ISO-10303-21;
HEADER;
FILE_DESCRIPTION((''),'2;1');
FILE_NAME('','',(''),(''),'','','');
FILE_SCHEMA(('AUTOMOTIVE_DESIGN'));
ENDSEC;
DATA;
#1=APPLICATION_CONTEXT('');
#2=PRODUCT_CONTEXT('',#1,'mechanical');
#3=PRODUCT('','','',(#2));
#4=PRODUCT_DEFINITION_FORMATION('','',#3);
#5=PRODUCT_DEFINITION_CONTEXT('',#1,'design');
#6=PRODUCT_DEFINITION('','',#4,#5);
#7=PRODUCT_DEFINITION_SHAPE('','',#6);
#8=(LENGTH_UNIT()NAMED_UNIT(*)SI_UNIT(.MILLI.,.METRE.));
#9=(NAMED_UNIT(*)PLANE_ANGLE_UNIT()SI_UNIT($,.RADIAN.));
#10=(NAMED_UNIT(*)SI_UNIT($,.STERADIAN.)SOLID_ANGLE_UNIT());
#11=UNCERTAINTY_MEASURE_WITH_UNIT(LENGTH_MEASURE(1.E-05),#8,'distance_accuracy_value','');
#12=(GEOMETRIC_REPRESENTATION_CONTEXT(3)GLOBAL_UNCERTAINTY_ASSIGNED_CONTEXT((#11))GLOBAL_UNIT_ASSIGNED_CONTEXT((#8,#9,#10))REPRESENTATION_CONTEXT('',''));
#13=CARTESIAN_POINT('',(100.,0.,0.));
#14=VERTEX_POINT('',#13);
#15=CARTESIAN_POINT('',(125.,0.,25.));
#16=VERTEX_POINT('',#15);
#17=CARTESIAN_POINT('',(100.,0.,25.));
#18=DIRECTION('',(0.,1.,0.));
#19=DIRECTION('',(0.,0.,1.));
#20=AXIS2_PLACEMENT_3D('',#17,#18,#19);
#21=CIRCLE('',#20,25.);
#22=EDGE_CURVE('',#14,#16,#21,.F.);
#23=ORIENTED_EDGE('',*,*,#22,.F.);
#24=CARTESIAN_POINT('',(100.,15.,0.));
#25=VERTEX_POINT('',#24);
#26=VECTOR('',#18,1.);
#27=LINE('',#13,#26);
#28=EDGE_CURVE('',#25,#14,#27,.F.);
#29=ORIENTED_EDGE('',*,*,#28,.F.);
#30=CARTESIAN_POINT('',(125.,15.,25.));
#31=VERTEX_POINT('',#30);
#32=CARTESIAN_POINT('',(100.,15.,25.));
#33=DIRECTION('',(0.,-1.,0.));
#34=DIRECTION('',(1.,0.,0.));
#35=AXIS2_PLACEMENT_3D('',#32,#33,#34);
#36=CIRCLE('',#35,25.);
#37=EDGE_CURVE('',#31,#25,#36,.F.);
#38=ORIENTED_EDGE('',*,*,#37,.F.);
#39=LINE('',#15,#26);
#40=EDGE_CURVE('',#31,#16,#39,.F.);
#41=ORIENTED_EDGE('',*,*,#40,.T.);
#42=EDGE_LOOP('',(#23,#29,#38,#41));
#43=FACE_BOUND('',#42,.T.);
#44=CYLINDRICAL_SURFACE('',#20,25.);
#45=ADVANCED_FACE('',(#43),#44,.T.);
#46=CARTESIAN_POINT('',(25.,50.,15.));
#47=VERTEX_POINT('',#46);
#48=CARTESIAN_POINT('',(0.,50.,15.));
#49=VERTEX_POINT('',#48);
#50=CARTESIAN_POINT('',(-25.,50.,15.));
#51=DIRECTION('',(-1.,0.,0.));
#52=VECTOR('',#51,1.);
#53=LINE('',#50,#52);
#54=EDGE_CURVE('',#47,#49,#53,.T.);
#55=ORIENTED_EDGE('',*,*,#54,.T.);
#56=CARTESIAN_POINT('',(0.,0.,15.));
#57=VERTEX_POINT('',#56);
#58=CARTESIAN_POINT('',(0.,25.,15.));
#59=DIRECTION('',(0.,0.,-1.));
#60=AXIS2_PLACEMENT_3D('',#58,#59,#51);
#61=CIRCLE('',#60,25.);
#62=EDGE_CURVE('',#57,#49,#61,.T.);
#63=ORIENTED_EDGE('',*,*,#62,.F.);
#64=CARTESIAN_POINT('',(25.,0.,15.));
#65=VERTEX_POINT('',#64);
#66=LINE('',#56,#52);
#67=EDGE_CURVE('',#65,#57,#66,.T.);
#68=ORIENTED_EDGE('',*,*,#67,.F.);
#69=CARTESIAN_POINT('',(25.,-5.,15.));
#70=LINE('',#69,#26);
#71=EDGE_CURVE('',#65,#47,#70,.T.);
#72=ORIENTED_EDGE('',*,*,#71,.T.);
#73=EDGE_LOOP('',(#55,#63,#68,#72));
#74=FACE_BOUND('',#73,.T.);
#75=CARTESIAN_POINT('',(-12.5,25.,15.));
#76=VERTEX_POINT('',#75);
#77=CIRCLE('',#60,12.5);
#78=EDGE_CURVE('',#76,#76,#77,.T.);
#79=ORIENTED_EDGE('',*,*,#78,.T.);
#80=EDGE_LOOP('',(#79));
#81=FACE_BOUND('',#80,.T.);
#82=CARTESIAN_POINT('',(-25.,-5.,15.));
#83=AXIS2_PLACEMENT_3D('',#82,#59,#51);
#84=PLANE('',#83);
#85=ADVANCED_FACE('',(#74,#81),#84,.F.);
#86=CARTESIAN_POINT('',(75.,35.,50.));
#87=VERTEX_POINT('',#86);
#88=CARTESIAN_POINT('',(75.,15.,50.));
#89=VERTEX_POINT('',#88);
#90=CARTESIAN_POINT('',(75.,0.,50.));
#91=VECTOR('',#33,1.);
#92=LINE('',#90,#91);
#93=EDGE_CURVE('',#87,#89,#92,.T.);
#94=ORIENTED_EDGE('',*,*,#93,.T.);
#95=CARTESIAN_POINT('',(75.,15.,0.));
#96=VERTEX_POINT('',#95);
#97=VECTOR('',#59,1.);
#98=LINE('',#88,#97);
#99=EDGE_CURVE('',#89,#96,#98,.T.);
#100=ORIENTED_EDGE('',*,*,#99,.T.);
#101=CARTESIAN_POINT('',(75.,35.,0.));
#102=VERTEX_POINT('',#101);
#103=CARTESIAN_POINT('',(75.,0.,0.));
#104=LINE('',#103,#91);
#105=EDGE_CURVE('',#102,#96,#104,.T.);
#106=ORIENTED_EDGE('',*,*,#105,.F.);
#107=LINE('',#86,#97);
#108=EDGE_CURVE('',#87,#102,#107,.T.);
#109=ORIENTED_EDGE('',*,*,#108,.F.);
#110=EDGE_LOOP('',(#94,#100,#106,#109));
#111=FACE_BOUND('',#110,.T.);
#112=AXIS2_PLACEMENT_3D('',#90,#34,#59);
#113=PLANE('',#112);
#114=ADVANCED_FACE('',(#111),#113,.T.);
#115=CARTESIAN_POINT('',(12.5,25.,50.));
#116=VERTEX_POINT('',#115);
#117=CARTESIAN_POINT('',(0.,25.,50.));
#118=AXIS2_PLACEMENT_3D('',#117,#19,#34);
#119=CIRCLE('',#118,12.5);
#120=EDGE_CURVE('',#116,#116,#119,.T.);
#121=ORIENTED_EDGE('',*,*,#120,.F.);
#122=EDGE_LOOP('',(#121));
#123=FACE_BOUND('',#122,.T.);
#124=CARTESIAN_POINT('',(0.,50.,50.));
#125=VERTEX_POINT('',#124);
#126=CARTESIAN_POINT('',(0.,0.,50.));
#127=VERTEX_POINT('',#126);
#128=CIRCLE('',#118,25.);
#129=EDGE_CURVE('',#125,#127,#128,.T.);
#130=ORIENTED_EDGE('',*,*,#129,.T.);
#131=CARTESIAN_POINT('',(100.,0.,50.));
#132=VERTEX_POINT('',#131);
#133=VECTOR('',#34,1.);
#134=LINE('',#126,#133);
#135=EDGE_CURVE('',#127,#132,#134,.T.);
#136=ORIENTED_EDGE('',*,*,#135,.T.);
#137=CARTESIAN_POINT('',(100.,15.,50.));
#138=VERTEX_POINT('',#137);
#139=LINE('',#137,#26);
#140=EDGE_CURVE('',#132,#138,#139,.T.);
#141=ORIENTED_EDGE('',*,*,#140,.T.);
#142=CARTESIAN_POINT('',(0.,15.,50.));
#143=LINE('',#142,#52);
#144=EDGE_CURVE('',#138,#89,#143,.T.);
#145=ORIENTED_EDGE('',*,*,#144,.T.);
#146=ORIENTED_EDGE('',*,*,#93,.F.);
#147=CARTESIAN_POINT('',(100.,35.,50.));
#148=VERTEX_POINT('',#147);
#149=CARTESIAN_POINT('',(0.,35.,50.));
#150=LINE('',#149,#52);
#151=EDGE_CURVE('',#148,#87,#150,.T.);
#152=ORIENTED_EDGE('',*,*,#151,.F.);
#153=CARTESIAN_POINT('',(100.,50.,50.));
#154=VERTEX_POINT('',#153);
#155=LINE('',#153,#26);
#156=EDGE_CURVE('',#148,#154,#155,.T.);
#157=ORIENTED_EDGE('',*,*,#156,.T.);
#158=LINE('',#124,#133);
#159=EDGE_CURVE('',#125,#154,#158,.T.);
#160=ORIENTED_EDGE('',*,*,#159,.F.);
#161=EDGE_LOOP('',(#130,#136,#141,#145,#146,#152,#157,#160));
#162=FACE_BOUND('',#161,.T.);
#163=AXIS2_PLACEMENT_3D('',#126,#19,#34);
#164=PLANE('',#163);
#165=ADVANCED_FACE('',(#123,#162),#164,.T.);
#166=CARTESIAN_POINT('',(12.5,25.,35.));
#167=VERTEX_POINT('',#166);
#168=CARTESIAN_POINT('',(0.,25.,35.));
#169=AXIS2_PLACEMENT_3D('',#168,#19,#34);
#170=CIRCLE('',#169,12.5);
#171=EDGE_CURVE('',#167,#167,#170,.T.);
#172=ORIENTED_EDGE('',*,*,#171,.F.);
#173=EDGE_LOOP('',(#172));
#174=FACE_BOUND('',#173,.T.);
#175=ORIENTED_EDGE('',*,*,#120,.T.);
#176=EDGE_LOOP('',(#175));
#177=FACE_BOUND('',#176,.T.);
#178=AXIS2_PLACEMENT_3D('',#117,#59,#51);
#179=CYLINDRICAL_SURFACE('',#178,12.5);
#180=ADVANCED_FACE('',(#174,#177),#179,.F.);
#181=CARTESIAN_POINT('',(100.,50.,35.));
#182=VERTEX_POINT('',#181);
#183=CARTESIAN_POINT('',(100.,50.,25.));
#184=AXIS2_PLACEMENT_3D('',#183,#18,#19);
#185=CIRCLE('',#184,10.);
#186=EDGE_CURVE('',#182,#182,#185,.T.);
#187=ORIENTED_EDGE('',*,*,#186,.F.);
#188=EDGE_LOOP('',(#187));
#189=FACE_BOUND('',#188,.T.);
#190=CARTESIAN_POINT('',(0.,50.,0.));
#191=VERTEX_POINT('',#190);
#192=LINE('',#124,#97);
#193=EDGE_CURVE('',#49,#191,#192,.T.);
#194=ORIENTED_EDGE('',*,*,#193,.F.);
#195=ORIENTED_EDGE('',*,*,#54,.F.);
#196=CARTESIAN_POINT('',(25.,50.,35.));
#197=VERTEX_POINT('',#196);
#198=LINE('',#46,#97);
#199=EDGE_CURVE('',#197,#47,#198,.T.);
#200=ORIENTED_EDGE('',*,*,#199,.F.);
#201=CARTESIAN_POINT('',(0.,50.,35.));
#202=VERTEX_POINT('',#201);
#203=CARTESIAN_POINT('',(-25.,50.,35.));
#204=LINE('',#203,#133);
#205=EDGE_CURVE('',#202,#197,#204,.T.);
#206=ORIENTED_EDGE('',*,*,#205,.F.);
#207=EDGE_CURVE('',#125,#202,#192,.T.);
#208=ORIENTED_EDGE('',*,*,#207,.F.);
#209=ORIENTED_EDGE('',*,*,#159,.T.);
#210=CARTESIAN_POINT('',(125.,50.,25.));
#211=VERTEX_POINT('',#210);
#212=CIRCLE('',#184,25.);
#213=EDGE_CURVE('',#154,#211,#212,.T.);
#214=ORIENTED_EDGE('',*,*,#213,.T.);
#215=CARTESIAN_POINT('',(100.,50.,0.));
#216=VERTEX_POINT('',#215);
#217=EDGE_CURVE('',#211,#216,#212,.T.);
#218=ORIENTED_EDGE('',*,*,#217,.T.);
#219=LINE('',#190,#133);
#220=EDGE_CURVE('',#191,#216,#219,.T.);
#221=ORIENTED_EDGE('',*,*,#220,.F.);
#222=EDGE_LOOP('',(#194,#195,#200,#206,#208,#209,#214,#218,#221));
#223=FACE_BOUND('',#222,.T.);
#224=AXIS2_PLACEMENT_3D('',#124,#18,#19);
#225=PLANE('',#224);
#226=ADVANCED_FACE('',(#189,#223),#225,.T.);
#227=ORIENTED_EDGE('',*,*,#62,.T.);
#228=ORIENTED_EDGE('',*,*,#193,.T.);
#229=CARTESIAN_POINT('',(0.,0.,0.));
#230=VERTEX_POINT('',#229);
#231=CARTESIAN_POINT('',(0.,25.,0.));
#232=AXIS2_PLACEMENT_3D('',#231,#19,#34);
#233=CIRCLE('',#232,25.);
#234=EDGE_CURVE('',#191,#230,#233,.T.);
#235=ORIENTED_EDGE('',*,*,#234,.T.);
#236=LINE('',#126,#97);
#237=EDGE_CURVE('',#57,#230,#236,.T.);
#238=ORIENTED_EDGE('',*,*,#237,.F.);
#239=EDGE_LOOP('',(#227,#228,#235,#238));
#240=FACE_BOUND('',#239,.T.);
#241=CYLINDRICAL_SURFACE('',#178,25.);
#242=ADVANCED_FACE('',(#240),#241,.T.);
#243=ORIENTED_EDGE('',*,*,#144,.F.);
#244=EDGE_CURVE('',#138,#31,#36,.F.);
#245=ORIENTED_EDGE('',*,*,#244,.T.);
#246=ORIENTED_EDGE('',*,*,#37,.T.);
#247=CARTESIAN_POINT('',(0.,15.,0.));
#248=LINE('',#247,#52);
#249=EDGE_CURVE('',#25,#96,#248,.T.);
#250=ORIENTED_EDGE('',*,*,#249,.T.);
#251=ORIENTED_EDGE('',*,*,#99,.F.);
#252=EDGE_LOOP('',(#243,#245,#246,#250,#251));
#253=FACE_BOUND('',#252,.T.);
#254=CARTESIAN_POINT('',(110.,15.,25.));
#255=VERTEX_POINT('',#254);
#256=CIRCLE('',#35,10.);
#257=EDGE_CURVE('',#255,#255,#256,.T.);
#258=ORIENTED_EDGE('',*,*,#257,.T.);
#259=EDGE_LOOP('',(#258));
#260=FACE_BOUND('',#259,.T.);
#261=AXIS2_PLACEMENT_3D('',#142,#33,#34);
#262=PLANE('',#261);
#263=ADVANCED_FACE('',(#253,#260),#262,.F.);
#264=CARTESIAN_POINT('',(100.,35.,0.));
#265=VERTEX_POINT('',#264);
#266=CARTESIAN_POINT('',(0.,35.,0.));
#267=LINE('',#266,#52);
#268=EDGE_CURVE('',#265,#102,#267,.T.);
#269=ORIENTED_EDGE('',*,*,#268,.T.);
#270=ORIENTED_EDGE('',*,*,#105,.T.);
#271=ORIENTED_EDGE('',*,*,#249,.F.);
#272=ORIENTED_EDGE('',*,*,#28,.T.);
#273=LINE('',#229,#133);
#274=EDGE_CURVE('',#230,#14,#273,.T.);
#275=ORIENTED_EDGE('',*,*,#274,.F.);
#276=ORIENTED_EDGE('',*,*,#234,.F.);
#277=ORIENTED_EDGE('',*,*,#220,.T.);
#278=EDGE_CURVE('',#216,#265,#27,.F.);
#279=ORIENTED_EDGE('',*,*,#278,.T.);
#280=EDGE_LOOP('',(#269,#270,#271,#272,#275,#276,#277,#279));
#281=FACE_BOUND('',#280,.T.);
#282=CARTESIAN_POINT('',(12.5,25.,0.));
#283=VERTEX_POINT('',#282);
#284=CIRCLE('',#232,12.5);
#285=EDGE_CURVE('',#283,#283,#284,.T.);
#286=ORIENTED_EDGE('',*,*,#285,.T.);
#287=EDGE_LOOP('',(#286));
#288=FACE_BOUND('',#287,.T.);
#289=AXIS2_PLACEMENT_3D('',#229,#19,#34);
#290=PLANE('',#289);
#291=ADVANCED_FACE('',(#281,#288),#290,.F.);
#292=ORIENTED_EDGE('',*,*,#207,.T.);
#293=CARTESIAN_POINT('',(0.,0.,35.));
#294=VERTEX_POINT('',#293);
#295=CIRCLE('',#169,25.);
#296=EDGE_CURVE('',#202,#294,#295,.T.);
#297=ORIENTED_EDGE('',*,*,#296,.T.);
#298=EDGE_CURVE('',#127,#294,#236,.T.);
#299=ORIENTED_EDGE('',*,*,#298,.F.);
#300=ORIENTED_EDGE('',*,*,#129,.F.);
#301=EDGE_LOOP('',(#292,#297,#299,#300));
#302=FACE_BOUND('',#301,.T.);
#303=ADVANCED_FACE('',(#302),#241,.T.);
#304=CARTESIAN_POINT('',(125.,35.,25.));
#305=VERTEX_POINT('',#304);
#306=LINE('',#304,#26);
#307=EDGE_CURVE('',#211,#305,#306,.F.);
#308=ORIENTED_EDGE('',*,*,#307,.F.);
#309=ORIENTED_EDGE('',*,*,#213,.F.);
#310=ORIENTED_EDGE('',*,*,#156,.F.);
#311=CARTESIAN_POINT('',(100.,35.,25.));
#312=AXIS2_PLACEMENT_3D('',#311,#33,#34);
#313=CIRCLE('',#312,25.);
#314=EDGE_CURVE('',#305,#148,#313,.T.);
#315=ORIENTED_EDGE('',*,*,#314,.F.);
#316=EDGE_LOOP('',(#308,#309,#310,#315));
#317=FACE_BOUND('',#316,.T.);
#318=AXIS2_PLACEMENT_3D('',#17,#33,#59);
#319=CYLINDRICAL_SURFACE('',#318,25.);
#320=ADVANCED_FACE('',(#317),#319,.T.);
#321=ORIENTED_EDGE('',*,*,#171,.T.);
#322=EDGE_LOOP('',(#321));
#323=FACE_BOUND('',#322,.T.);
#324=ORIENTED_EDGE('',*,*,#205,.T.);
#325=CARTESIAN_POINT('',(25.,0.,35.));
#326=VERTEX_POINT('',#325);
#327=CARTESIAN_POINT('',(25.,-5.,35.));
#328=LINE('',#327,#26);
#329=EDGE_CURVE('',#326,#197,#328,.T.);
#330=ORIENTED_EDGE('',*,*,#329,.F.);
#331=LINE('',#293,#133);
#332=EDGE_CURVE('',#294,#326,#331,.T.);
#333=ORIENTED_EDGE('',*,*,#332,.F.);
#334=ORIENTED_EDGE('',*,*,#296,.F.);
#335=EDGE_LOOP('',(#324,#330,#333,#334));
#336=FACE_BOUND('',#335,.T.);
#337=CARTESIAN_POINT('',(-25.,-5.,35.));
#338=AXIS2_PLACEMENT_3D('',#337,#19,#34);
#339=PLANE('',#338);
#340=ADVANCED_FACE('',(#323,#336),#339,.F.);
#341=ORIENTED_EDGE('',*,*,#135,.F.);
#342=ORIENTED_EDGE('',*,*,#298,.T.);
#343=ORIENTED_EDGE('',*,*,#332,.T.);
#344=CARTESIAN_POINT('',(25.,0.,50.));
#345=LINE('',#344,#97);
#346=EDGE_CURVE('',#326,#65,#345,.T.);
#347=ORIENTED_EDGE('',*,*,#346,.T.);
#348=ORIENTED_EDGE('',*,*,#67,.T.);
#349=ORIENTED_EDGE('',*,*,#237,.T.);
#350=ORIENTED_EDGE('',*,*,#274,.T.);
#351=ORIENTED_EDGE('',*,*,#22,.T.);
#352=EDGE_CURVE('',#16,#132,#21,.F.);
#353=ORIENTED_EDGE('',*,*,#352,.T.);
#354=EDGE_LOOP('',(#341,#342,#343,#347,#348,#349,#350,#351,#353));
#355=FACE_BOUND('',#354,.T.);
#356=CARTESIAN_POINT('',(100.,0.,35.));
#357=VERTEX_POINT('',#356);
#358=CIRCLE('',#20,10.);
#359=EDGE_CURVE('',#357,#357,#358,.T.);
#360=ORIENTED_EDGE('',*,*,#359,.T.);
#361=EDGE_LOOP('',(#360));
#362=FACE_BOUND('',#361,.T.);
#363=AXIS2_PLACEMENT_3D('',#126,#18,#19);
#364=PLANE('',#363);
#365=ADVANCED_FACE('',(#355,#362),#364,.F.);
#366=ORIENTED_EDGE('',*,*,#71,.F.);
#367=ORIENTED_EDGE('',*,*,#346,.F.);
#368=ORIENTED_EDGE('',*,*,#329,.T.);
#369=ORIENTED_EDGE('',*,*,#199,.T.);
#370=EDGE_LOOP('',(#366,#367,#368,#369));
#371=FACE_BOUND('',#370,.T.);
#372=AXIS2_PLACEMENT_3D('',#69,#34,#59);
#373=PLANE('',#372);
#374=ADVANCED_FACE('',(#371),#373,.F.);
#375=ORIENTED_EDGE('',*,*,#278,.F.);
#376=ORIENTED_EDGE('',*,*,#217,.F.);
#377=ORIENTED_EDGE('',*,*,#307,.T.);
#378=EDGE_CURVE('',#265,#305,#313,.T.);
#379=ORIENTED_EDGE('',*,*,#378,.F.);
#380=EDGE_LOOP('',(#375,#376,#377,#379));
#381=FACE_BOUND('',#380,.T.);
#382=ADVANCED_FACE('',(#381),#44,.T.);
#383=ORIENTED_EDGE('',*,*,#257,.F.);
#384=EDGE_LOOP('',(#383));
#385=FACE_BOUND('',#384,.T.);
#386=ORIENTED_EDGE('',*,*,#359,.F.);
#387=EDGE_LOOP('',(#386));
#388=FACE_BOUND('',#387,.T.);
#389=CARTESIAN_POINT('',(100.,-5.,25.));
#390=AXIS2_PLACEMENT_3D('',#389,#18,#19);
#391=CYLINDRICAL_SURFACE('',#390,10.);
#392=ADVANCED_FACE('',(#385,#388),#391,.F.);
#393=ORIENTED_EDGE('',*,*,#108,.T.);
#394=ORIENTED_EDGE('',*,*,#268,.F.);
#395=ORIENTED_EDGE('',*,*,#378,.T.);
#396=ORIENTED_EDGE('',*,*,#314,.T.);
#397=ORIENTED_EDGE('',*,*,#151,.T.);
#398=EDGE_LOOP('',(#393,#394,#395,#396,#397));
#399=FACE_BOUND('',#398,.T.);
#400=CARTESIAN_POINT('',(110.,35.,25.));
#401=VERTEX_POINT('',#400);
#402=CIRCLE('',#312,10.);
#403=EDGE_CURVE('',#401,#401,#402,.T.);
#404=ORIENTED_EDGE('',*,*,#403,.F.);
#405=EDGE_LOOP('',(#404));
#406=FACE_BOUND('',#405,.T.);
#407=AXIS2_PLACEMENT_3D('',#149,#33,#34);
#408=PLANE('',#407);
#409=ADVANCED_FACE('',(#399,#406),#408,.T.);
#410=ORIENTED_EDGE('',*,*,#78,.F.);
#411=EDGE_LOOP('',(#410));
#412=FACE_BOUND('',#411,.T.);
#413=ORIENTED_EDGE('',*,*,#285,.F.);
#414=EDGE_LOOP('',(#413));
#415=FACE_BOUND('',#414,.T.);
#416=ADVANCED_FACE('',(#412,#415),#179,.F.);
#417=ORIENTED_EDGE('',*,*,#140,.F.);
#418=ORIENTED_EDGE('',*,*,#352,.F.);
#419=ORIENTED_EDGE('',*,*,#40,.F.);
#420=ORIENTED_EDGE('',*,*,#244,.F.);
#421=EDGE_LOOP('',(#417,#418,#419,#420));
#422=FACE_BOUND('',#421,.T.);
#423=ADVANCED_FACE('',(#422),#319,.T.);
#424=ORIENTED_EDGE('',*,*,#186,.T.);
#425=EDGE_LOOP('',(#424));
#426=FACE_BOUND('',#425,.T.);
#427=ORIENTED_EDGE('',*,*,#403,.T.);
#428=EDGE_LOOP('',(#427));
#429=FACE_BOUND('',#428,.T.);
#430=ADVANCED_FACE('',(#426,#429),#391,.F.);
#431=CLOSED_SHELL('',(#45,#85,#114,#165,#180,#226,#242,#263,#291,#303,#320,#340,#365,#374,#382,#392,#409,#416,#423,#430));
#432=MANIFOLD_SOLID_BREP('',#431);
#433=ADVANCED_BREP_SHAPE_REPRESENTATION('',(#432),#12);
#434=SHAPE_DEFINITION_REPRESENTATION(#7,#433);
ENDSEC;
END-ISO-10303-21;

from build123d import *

# Parameters (mm, degrees)
SKETCH1_R           = 12.5
BOSS_EXTRUDE1_DEPTH = 50
FILLET1_R           = 25
SKETCH2_R           = 10
SKETCH2_W           = 50
SKETCH2_H           = 20
CUT_EXTRUDE1_DEPTH  = 55


with BuildPart() as part:
    # Sketch1 → Boss-Extrude1 (new body)
    with BuildSketch(Plane.XY):
        with BuildLine():
            ThreePointArc((0, 50), (-25, 25), (0, 0))
            Line((0, 0), (125, 0))
            Line((125, 0), (125, 15))
            Line((125, 15), (75, 15))
            Line((75, 15), (75, 35))
            Line((75, 35), (125, 35))
            Line((125, 35), (125, 50))
            Line((125, 50), (0, 50))
        make_face()
        with Locations((0, 25)):
            Circle(SKETCH1_R, mode=Mode.SUBTRACT)
    extrude(amount=BOSS_EXTRUDE1_DEPTH)

    # Fillet1
    fillet1_edges = [part.edges().sort_by_distance(p)[0] for p in [
        (125, 7.5, 0),
        (125, 42.5, 0),
        (125, 7.5, 50),
        (125, 42.5, 50),
    ]]
    fillet(fillet1_edges, radius=FILLET1_R - 0.0001)  # a hair under: the kernel refuses the full size

    # Sketch2 → Cut-Extrude1 (cut)
    with BuildSketch(Plane(origin=(0, 50, 0), x_dir=(1, 0, 0), z_dir=(0, 1, 0))):
        with Locations(Location((100, -25, 0), (0, 0, 270))):
            Circle(SKETCH2_R)
        with Locations((0, -25)):
            Rectangle(SKETCH2_W, SKETCH2_H)
    extrude(amount=-CUT_EXTRUDE1_DEPTH, mode=Mode.SUBTRACT)


solid = part.part
